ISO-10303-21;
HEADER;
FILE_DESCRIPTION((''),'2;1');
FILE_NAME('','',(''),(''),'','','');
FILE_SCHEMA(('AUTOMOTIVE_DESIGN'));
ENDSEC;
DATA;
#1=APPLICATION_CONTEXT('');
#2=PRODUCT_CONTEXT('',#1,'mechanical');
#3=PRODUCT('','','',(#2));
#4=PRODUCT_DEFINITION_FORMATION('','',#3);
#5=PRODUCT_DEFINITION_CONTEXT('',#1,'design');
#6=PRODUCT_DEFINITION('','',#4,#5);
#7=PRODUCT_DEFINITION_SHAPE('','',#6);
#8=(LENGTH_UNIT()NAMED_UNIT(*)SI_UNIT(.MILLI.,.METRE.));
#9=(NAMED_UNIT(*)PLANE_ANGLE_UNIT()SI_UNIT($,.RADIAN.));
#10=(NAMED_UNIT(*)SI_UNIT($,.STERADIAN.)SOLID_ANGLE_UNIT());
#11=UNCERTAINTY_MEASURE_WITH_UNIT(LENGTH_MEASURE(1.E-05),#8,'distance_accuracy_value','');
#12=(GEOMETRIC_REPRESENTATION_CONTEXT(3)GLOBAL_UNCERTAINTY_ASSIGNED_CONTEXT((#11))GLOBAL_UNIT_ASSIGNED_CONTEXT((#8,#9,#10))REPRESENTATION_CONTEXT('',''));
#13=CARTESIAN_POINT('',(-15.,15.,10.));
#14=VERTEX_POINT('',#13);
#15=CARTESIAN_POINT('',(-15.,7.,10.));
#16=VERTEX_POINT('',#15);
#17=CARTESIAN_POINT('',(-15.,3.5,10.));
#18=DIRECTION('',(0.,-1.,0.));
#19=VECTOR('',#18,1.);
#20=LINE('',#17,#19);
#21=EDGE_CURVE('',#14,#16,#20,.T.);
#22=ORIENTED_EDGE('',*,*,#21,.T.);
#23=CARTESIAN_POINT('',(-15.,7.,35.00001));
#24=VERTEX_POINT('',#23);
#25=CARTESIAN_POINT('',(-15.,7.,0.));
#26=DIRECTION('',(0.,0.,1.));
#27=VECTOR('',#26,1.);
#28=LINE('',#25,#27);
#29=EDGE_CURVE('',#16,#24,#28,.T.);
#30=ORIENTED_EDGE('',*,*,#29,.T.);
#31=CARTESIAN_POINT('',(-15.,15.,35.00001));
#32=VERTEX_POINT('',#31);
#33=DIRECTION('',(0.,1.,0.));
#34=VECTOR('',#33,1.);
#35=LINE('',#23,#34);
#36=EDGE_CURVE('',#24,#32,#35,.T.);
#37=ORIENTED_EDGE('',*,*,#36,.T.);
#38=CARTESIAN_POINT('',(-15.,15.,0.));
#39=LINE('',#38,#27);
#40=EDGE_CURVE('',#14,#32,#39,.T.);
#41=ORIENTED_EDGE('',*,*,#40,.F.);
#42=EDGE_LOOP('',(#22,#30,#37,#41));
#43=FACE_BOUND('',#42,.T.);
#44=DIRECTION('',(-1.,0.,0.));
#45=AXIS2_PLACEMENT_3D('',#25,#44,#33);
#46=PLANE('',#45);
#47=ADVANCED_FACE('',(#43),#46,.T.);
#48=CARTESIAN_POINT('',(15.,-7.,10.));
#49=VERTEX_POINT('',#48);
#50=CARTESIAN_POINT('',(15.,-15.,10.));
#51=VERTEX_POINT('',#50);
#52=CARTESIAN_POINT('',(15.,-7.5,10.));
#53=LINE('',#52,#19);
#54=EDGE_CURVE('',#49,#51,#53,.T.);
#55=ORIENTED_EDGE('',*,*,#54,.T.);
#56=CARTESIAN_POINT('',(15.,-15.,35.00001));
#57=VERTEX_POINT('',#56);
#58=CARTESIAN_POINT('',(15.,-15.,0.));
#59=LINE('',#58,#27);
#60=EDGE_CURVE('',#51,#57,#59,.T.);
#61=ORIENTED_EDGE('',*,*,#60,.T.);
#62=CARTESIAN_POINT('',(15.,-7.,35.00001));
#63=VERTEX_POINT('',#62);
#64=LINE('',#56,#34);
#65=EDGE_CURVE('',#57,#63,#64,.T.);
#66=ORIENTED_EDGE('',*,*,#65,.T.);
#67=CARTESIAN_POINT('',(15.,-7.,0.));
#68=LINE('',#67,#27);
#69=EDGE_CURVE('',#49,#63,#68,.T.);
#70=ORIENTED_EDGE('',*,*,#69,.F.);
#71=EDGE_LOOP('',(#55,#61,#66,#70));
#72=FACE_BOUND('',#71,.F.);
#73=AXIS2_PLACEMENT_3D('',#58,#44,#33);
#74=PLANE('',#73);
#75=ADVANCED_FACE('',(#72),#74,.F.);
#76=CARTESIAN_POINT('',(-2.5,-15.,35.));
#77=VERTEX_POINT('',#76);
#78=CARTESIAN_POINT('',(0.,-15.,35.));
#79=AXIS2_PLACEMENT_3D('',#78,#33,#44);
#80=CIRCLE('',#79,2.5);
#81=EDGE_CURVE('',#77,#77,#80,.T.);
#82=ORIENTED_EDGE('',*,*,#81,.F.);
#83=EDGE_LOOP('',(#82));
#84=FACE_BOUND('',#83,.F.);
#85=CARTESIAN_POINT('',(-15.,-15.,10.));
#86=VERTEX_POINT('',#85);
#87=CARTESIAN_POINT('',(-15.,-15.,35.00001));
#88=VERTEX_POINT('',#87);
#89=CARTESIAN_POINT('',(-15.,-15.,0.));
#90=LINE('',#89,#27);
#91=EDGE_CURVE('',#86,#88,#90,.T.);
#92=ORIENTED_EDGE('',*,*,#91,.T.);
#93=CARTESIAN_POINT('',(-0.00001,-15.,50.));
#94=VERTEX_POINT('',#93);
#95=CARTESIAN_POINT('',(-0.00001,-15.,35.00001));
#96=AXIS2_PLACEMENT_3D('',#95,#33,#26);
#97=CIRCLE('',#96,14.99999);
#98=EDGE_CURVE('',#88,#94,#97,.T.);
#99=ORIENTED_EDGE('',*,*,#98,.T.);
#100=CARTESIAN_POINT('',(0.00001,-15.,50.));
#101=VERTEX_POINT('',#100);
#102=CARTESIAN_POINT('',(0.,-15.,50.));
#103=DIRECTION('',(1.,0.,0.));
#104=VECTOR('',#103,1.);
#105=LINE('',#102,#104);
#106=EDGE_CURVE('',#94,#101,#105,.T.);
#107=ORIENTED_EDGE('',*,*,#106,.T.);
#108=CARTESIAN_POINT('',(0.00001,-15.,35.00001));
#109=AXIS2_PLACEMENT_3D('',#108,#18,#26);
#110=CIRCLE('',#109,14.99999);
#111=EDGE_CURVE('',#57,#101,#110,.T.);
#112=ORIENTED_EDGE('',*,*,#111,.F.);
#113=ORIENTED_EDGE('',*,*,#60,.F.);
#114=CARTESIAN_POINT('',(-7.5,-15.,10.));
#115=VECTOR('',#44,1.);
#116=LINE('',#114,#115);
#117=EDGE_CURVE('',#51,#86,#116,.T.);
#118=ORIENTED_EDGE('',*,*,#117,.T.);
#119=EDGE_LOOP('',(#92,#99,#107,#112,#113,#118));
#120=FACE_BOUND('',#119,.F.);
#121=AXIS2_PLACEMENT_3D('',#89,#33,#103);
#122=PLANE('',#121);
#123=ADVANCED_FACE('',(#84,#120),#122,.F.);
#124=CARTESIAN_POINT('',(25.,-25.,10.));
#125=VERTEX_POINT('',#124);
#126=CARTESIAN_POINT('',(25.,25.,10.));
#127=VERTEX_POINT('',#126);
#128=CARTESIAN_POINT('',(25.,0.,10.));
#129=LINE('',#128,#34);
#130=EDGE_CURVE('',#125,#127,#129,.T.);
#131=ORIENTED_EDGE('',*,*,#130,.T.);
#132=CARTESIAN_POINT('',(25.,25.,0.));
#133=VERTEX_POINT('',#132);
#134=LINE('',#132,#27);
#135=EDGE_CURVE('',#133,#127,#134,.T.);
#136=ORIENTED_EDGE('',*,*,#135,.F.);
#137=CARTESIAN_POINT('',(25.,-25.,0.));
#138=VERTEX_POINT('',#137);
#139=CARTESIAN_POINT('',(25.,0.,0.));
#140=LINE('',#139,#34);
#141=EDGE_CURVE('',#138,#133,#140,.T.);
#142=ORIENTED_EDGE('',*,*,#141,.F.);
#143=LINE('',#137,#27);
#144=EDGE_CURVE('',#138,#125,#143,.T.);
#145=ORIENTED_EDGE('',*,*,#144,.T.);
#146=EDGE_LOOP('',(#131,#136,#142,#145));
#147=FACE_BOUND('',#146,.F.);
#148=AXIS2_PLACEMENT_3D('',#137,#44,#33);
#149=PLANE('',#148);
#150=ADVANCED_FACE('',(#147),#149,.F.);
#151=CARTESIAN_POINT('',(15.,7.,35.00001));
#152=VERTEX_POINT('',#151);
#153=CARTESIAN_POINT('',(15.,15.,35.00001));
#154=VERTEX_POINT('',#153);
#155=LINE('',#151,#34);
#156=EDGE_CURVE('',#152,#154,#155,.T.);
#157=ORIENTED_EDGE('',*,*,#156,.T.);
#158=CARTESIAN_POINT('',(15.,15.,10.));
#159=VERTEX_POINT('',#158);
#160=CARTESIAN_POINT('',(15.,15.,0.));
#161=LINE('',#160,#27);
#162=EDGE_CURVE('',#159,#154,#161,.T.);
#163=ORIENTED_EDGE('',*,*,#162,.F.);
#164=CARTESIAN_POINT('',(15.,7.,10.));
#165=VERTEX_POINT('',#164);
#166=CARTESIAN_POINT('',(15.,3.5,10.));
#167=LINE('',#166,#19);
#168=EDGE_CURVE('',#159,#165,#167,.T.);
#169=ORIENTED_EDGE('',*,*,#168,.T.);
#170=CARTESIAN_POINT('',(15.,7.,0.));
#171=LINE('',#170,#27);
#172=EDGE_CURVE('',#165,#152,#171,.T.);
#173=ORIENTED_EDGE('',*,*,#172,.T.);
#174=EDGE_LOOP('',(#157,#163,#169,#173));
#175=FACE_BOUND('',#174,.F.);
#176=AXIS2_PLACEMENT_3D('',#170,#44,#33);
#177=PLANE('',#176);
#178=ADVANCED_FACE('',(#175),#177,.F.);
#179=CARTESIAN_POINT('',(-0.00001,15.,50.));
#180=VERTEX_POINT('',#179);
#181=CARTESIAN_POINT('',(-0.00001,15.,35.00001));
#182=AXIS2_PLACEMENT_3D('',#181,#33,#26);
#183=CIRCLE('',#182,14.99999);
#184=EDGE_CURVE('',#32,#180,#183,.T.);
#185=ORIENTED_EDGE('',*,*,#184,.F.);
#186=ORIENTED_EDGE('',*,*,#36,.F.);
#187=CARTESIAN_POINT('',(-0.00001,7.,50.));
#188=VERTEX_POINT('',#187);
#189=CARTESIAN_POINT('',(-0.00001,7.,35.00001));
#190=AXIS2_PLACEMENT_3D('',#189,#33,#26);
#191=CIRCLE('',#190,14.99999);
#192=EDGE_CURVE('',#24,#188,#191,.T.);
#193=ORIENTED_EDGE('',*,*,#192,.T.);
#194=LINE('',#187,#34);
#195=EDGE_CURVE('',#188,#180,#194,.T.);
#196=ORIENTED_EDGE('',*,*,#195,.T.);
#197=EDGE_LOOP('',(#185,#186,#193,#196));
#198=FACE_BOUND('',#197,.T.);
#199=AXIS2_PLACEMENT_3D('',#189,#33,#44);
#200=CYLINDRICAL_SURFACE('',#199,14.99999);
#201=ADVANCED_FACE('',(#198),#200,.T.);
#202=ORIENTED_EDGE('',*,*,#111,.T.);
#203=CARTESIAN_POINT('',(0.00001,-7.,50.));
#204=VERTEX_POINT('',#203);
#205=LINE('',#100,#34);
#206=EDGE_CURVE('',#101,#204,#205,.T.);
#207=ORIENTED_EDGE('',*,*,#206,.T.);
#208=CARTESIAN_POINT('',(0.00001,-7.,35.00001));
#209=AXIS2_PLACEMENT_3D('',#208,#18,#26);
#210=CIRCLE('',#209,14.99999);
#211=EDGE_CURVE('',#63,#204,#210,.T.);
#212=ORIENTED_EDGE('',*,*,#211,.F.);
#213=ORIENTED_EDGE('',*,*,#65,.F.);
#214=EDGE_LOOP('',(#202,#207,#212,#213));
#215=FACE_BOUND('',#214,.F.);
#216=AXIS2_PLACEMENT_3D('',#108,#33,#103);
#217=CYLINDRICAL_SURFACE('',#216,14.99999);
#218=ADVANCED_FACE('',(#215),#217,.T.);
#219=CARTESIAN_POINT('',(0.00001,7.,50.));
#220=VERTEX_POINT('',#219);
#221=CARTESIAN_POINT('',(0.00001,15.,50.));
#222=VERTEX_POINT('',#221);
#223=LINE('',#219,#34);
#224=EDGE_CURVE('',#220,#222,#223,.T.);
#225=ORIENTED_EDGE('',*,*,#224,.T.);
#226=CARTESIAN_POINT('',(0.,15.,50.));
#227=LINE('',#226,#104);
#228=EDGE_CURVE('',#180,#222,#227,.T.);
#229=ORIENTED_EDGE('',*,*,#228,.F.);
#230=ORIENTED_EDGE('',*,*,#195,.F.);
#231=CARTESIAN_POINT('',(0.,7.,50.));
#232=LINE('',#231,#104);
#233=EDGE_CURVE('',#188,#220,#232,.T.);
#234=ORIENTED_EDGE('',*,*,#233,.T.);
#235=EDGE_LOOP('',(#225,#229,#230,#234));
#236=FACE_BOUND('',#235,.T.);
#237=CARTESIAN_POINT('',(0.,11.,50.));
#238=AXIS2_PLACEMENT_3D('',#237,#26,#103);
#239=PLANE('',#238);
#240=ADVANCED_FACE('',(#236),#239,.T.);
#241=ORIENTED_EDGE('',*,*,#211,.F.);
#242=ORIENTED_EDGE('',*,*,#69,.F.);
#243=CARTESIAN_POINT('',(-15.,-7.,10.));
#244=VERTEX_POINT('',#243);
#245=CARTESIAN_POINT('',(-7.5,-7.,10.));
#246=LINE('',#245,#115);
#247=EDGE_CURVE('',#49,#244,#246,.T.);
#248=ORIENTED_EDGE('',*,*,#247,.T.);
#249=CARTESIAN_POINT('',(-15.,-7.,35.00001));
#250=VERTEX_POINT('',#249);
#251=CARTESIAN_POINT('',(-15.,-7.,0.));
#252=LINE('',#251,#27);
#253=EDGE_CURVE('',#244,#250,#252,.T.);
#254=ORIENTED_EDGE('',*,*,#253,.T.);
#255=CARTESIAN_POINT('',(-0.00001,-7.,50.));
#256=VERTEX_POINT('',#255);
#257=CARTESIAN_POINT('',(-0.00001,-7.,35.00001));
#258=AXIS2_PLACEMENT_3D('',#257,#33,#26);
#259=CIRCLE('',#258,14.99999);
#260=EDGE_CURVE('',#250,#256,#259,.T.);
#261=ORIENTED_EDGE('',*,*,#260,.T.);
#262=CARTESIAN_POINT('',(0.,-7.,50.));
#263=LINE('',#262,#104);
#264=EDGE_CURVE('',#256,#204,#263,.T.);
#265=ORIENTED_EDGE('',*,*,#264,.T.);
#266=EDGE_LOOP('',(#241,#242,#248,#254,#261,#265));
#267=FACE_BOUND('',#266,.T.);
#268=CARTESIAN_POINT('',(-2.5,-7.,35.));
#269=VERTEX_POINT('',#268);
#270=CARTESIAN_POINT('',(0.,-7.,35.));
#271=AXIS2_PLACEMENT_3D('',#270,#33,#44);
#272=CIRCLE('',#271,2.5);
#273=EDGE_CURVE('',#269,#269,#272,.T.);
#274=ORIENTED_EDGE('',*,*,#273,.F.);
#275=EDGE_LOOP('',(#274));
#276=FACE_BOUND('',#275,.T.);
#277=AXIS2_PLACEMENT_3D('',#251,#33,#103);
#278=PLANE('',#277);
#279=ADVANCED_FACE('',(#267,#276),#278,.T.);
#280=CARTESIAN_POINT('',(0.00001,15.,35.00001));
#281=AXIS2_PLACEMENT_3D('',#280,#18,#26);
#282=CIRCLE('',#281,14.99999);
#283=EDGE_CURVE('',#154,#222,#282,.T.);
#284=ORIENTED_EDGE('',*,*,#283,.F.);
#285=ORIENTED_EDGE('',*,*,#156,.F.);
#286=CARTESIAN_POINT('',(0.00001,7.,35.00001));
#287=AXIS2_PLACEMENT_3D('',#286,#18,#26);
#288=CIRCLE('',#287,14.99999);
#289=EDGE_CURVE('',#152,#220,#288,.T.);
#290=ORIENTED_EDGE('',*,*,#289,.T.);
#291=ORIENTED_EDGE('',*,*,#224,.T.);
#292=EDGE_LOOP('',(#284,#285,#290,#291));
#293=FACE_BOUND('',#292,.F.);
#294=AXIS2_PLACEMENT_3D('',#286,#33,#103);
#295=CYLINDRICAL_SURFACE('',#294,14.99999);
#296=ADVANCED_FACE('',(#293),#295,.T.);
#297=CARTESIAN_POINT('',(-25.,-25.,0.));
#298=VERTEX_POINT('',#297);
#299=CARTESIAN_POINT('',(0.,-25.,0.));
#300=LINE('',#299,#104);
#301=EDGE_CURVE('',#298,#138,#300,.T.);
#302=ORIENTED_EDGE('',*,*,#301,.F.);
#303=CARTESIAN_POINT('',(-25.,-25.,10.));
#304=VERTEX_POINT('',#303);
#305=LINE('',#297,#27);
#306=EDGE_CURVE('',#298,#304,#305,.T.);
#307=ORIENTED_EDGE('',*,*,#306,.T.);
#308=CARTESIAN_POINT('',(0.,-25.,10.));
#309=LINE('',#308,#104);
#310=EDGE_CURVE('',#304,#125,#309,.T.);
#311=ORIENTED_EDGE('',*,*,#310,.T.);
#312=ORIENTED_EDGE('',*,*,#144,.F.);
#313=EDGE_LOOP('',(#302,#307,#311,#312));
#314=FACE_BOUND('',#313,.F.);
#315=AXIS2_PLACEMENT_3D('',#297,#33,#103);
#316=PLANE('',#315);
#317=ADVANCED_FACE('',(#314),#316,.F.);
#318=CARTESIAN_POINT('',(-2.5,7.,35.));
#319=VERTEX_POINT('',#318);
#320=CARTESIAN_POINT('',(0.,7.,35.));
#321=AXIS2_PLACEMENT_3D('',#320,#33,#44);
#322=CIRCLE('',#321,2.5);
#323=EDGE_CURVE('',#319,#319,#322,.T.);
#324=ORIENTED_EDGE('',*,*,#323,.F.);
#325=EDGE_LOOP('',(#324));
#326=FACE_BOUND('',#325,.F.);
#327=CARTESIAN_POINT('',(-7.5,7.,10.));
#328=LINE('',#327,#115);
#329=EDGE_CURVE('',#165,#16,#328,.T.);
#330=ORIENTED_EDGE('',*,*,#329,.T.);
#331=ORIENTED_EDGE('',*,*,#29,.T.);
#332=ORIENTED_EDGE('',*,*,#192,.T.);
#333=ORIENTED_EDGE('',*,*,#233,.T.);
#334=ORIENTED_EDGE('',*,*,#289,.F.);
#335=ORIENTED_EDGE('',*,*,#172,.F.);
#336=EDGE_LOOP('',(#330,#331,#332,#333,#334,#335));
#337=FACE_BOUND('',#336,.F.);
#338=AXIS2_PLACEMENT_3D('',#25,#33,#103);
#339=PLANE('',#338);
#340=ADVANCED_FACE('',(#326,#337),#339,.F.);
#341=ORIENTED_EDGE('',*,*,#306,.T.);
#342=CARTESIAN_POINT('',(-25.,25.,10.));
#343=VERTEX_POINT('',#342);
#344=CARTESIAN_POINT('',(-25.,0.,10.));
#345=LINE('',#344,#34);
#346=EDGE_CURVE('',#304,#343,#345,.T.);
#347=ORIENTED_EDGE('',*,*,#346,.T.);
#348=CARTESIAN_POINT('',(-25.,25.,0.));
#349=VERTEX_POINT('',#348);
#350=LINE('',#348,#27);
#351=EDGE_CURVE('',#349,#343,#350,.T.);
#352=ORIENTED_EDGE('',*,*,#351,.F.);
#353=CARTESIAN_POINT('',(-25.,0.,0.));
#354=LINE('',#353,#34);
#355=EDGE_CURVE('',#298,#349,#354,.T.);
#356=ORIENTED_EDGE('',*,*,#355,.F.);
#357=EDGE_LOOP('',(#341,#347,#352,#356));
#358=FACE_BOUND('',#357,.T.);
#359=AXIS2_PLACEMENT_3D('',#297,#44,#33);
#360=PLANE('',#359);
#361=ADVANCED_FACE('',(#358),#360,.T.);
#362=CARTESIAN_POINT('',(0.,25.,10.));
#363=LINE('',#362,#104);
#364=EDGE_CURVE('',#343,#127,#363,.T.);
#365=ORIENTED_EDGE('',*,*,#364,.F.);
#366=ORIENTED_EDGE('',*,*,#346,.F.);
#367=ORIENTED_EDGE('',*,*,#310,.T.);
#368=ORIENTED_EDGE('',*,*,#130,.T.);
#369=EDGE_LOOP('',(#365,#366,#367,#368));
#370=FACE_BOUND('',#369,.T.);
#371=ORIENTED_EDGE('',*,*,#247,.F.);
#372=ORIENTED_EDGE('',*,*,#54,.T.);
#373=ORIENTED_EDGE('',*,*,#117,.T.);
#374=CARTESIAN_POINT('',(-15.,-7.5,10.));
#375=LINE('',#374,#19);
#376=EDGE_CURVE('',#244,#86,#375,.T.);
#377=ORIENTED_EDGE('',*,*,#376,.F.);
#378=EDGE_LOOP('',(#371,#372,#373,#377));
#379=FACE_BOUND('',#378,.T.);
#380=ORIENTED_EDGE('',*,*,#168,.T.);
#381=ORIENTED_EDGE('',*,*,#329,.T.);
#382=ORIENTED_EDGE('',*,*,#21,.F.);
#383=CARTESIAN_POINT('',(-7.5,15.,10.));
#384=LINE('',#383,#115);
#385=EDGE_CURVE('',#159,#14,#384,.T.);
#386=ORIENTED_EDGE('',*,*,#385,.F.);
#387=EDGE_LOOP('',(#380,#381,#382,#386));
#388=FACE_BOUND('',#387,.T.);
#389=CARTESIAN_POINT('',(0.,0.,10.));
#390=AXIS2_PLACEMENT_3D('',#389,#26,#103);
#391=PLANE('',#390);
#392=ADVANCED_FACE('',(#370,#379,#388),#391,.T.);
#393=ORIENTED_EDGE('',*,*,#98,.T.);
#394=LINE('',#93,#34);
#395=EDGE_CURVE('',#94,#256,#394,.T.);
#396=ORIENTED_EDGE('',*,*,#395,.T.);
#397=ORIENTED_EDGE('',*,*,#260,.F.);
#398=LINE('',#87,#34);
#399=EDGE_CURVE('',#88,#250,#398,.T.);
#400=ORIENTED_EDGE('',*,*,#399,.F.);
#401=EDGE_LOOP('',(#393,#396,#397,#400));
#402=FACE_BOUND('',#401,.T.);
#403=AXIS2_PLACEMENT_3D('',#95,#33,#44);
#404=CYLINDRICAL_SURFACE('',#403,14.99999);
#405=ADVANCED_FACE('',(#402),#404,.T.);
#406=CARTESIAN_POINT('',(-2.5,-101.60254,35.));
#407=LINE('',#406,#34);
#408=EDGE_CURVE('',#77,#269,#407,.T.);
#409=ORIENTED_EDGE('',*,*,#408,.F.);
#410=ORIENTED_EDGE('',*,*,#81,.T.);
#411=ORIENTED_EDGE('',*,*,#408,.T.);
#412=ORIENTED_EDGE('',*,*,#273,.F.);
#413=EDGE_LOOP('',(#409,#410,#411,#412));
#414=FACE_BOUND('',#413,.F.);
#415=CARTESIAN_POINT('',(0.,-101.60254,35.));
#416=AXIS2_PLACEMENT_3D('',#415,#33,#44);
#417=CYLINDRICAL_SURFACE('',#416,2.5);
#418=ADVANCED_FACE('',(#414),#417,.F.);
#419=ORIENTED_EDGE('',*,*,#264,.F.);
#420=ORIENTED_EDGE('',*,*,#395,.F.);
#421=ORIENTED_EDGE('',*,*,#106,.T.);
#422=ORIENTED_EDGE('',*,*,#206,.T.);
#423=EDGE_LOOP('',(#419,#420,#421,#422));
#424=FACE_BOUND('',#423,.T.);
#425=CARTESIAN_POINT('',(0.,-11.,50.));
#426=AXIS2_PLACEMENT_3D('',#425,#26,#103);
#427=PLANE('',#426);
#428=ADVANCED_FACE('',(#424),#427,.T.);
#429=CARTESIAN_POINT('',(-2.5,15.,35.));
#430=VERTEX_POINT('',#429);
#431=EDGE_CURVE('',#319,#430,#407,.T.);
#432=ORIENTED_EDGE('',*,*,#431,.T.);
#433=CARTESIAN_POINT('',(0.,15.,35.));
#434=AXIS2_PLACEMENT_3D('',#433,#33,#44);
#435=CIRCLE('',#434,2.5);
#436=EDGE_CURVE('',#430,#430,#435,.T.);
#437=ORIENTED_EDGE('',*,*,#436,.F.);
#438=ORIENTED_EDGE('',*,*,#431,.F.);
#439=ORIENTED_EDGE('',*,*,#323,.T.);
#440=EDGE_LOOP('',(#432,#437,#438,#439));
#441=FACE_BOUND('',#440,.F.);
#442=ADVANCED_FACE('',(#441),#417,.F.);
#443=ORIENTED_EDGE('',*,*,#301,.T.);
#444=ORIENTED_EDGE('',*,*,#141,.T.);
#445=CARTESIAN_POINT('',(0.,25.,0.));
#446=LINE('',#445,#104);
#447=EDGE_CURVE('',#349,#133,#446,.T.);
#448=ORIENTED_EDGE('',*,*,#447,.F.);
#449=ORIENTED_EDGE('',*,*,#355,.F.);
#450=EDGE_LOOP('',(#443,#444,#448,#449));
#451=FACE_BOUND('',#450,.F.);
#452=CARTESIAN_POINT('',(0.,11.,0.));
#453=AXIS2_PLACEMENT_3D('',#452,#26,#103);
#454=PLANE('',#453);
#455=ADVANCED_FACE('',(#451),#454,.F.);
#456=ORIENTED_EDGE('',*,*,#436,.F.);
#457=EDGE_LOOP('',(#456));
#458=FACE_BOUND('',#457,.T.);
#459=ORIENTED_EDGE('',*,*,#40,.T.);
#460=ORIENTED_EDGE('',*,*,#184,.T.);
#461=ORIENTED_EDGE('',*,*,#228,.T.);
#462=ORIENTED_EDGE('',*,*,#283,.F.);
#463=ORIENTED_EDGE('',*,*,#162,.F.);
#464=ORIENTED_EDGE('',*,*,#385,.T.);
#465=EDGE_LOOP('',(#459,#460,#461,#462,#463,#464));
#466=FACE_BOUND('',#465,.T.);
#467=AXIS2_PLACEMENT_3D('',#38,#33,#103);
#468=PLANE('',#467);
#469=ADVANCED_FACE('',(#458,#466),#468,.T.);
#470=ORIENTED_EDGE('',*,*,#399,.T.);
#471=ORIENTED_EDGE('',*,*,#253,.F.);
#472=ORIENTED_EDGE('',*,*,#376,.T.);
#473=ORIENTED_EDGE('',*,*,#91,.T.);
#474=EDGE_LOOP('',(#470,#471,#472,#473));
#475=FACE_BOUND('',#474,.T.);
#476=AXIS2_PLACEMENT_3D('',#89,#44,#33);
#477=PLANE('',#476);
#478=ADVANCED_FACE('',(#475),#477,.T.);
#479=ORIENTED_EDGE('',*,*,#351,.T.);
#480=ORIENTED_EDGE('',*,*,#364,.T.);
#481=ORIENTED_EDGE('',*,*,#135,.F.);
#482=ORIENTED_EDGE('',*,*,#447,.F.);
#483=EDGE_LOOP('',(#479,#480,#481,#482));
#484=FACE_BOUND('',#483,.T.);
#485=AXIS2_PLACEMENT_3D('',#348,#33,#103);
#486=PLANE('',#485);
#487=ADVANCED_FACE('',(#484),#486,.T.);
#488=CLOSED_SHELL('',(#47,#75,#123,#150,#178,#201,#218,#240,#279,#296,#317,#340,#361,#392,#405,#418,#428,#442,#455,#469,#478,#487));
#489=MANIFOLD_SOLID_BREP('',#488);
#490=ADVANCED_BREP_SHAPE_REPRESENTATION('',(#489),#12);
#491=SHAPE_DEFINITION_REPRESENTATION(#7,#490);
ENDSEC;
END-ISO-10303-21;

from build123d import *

# Parameters (mm, degrees)
F0_W     = 50
F0_H     = 50
F1_DEPTH = 10
F2_W     = 30
F2_H     = 8
F3_DEPTH = 50
F4_R     = 14.99999
F6_D     = 5


# Not quite as in the source:
# - a fillet or chamfer is up to 0.001 mm smaller than in the source, because OpenCascade refuses the exact size


with BuildPart() as f1:
    # F0 (on Top) → F1 (new body)
    with BuildSketch(Plane.XY):
        Rectangle(F0_W, F0_H)
    extrude(amount=F1_DEPTH)

    # F2 (on Top) → F3 (join)
    with BuildSketch(Plane.XY):
        with Locations((0, 11)):
            Rectangle(F2_W, F2_H)
        with Locations((0, -11)):
            Rectangle(F2_W, F2_H)
    extrude(amount=F3_DEPTH)

    # F4 (radius 15 in the source; OpenCascade refuses exactly that, so slightly less here)
    f4_edges = [f1.edges().sort_by_distance(p)[0] for p in [
        (-15, -11, 50),
        (-15, 11, 50),
        (15, 11, 50),
        (15, -11, 50),
    ]]
    fillet(f4_edges, radius=F4_R)

    # F6 (through all)
    with Locations(Plane.XZ.offset(15)):
        with Locations((0, 35)):
            Hole(F6_D / 2)


solid = f1.part
